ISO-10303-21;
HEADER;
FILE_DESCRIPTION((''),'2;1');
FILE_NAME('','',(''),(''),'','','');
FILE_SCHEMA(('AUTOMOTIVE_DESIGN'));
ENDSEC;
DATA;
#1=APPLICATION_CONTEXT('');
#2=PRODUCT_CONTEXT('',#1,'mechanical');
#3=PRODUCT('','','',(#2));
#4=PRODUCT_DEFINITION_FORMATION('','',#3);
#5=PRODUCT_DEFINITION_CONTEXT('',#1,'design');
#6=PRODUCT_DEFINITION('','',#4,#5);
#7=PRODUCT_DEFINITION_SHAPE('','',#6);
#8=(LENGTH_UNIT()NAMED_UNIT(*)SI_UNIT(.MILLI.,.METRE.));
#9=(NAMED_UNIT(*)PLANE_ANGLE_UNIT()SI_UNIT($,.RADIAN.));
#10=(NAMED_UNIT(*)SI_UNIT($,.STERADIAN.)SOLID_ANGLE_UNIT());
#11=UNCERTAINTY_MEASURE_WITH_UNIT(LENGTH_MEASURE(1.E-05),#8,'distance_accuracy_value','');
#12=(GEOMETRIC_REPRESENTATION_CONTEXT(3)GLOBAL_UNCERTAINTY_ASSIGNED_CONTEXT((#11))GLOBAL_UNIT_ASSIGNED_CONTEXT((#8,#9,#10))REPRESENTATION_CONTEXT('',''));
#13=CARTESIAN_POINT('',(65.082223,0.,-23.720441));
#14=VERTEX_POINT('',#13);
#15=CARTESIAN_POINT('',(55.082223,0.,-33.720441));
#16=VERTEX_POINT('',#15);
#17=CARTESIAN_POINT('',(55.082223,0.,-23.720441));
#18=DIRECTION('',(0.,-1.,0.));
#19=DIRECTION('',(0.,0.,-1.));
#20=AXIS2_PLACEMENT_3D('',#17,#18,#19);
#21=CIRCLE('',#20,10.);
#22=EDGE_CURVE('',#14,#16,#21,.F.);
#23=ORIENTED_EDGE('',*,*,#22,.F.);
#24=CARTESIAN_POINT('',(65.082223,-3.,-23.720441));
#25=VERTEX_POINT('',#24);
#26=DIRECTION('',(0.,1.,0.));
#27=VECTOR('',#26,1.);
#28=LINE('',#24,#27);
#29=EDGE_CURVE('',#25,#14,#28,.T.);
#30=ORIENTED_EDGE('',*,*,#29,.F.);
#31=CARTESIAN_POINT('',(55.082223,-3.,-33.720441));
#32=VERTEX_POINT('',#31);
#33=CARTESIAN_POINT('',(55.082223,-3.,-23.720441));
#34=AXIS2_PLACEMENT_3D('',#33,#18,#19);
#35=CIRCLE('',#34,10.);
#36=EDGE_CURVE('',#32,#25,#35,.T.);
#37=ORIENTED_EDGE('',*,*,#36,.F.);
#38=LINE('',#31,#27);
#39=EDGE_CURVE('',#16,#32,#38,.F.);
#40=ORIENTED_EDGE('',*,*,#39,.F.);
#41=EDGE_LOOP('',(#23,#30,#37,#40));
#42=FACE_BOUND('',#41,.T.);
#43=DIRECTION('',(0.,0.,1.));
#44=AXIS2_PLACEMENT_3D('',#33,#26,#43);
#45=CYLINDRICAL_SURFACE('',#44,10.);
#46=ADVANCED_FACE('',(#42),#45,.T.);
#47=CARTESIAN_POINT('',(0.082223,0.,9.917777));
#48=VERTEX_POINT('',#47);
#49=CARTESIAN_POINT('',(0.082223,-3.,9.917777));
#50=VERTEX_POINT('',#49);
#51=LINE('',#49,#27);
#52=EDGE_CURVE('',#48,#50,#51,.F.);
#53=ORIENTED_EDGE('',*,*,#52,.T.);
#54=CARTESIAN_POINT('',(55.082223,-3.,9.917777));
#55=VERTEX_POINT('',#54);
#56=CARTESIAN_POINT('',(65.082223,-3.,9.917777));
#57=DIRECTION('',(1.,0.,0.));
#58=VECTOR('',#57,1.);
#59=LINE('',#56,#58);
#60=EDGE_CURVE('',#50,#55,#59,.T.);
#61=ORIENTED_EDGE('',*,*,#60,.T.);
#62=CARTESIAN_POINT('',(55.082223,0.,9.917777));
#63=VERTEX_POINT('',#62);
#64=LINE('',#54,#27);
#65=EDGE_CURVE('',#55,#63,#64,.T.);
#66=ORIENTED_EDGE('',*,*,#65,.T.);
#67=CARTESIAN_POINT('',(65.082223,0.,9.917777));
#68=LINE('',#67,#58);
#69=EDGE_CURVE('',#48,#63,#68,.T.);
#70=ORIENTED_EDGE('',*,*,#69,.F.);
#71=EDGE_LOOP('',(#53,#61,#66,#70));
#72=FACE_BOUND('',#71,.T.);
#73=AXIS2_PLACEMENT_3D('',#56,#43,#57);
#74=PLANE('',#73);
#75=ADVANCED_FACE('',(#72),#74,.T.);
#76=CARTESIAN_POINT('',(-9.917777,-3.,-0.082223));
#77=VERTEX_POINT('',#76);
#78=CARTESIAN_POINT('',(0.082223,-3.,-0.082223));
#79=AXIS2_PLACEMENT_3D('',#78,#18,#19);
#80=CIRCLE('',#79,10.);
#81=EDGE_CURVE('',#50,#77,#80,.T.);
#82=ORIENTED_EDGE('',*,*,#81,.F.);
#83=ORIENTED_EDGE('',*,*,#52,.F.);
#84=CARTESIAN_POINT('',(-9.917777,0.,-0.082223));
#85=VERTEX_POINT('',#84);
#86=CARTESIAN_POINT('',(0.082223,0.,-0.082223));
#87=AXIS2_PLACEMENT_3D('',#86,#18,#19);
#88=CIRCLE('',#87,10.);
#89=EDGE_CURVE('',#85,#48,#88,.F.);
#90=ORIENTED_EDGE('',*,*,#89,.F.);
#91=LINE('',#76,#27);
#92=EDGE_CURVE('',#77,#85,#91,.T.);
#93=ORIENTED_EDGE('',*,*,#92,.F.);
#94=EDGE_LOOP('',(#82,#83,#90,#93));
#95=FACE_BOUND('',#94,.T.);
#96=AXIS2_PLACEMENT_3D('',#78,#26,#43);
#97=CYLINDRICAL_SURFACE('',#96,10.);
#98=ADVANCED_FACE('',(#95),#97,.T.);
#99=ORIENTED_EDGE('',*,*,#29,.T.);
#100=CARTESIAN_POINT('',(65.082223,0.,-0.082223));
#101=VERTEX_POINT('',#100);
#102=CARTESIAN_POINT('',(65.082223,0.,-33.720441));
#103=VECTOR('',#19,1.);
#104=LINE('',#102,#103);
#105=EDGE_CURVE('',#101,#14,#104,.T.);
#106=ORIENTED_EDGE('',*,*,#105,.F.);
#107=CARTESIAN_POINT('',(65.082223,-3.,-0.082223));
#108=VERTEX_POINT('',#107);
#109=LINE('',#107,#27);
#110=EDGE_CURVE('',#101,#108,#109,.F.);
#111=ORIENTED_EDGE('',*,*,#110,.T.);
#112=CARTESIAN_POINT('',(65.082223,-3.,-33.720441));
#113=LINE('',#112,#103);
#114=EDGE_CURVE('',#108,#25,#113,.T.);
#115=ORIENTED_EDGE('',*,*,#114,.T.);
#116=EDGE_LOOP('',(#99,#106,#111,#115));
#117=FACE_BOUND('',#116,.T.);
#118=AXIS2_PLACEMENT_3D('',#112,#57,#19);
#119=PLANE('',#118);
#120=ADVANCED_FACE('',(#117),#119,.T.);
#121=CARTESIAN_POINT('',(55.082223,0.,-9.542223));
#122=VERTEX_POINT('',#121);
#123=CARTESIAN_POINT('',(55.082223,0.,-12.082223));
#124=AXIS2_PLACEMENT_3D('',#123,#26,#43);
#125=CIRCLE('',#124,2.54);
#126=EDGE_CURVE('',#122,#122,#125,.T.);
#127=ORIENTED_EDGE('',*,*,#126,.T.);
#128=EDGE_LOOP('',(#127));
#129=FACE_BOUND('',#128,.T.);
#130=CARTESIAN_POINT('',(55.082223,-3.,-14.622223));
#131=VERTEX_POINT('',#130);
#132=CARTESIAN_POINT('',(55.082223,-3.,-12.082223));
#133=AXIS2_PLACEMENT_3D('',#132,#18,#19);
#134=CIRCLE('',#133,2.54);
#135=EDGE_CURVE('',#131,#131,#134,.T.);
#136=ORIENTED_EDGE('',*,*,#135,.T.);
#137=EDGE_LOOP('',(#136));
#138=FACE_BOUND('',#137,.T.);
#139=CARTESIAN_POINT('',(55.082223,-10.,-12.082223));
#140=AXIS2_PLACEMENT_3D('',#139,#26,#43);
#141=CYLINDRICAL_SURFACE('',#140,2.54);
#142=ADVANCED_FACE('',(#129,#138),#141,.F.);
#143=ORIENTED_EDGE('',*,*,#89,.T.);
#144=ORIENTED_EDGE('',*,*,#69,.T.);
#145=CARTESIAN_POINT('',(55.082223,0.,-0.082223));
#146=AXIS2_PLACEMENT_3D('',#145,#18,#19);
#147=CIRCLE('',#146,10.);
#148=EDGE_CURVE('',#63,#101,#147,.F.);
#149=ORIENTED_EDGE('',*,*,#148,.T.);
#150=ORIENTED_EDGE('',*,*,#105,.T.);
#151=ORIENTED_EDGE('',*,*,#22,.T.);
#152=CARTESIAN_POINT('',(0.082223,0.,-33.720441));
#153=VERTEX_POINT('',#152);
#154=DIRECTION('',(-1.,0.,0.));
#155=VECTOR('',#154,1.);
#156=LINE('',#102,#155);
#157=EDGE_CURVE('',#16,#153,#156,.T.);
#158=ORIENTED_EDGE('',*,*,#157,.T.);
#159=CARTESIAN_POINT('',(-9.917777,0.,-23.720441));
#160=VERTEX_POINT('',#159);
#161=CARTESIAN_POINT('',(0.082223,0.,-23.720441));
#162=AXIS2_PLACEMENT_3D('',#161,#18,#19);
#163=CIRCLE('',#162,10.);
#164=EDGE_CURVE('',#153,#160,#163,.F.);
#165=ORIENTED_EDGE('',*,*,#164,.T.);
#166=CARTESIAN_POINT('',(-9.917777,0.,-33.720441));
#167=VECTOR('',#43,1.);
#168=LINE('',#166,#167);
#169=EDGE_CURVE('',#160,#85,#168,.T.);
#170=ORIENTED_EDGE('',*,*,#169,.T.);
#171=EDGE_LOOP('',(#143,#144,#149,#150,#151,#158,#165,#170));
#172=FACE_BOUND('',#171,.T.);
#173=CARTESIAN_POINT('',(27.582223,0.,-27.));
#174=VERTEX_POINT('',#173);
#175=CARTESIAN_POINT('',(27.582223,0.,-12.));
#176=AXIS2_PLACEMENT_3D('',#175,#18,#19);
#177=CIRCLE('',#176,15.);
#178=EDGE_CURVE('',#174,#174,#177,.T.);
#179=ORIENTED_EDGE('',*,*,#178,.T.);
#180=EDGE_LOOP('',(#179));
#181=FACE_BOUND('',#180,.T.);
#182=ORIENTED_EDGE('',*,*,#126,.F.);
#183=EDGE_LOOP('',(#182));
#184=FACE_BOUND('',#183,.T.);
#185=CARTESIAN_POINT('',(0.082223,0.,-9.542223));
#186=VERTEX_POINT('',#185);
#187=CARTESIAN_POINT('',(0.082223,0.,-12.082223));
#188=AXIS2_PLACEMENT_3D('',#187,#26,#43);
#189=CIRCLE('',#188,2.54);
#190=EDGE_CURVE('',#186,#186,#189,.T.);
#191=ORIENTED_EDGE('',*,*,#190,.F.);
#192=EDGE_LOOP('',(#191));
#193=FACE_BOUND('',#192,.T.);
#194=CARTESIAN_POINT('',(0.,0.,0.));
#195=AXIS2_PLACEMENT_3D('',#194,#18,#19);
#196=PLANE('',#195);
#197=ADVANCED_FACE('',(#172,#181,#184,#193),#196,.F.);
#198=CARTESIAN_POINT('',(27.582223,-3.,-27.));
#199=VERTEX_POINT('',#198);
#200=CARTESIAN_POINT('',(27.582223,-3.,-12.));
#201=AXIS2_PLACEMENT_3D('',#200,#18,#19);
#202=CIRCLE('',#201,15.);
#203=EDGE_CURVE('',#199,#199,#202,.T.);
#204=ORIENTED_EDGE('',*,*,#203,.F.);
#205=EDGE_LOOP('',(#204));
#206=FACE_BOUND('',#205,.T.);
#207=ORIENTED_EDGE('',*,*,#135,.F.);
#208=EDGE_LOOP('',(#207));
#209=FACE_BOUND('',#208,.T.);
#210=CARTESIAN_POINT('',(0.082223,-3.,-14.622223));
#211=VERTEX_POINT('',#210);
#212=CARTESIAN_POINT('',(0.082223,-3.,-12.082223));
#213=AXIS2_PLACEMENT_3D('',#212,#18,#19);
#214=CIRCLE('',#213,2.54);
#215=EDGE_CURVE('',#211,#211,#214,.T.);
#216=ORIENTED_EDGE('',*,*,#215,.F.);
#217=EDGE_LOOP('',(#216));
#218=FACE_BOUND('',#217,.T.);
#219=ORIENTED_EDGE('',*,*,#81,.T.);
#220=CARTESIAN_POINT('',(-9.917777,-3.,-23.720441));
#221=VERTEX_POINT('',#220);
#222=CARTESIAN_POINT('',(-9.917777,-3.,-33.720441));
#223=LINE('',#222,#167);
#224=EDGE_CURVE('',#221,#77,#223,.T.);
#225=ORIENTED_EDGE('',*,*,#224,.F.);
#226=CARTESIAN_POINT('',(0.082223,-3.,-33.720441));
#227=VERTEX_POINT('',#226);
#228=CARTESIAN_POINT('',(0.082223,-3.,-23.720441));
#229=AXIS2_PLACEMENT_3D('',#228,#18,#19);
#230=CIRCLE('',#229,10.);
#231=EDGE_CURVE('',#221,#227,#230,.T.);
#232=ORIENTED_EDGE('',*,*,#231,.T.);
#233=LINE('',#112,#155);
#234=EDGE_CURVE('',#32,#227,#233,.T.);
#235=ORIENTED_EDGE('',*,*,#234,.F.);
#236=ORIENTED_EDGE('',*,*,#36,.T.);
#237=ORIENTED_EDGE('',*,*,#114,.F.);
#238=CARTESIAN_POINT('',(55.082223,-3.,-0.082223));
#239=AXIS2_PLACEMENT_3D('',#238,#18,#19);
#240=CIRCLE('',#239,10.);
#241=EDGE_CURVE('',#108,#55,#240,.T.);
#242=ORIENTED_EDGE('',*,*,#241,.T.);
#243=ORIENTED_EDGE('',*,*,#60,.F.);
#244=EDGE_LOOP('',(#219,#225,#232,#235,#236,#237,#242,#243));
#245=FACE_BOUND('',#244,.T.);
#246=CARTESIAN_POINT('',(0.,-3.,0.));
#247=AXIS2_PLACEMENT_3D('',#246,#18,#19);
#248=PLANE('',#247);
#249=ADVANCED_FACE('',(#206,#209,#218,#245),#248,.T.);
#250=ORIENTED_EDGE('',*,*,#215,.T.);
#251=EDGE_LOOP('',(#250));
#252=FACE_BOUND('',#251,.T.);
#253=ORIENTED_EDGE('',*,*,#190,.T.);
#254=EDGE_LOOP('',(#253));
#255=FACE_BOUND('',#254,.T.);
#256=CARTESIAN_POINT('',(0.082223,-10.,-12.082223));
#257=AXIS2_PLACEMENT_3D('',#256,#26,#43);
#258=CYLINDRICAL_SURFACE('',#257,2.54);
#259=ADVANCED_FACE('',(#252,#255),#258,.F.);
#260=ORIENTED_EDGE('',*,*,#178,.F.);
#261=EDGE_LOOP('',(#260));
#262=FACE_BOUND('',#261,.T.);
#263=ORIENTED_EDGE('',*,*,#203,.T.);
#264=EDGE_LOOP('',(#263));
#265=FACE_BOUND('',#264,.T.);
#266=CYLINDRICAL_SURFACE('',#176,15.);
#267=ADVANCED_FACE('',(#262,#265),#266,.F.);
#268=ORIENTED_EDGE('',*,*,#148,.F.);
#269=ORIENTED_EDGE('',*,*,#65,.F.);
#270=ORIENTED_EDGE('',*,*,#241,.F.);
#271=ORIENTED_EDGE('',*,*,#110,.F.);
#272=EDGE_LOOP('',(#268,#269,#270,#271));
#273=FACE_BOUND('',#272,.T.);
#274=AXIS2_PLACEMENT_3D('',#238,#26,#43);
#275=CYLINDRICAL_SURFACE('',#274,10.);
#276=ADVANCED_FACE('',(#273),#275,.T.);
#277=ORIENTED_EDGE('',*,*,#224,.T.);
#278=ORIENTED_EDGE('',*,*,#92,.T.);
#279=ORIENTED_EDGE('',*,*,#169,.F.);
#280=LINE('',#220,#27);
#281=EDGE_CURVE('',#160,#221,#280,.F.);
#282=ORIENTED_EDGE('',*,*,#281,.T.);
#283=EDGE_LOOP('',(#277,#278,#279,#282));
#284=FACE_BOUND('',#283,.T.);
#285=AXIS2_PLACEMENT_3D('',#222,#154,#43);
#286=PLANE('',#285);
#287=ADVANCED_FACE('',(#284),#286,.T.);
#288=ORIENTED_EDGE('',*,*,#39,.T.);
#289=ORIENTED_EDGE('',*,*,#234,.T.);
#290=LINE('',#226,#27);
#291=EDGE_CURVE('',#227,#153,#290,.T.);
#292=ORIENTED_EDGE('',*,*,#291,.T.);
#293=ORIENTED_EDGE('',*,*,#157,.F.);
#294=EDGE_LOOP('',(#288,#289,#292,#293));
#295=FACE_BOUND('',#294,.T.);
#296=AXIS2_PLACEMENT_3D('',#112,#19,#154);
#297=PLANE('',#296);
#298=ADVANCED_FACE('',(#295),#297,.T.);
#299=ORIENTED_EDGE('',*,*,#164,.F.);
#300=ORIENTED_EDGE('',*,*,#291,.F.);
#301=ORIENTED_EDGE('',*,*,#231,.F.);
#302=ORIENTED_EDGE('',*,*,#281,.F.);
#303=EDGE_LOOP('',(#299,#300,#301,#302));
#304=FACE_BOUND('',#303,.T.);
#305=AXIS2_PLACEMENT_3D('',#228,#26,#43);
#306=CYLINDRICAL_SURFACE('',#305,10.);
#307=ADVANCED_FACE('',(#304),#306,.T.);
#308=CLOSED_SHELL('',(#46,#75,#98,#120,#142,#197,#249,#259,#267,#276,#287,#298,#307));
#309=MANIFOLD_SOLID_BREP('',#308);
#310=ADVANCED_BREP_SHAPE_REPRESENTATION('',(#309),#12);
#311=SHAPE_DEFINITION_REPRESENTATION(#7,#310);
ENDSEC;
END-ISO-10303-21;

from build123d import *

# Parameters (mm, degrees)
SKETCH_1_W             = 75
SKETCH_1_H             = 43.638217254
SM_BASE_FLANGE_1_DEPTH = 3
SKETCH_8_R             = 15
CUT_EXTRUDE_1_DEPTH    = 74.36050648
FILLET_1_R             = 10
SKETCH_9_R             = 2.54
CUT_EXTRUDE_2_DEPTH    = 10


# Sheet-metal steps are written as plain solids
with BuildPart() as part:
    # Sketch 1 → 基体-法兰1 (new body)
    with BuildSketch(Plane(origin=(0, 0, 0), x_dir=(1, 0, 0), z_dir=(0, 1, 0))):
        with Locations((27.582223351, 11.901331978)):
            Rectangle(SKETCH_1_W, SKETCH_1_H)
    extrude(amount=-SM_BASE_FLANGE_1_DEPTH)

    # 草图8 → 切除-拉伸1 (cut, through all)
    with BuildSketch(Plane(origin=(0, -3, 0), x_dir=(-1, 0, 0), z_dir=(0, -1, 0))):
        with Locations(Location((-27.582223351, 12, 0), (0, 0, 90))):
            Circle(SKETCH_8_R)
    extrude(amount=-CUT_EXTRUDE_1_DEPTH, mode=Mode.SUBTRACT)

    # 圆角1
    fillet_1_edges = [part.edges().sort_by_distance(p)[0] for p in [
        (65.082223351, -1.5, 9.917776649),
        (-9.917776649, -1.5, 9.917776649),
        (-9.917776649, -1.5, -33.720440605),
        (65.082223351, -1.5, -33.720440605),
    ]]
    fillet(fillet_1_edges, radius=FILLET_1_R)

    # 草图9 → 切除-拉伸2 (cut)
    with BuildSketch(Plane(origin=(0, 0, 0), x_dir=(1, 0, 0), z_dir=(0, 1, 0))):
        with Locations(Location((0.082223351, 12.082223351, 0), (0, 0, 270))):
            Circle(SKETCH_9_R)
        with Locations(Location((55.082223351, 12.082223351, 0), (0, 0, 270))):
            Circle(SKETCH_9_R)
    extrude(amount=-CUT_EXTRUDE_2_DEPTH, mode=Mode.SUBTRACT)


solid = part.part
